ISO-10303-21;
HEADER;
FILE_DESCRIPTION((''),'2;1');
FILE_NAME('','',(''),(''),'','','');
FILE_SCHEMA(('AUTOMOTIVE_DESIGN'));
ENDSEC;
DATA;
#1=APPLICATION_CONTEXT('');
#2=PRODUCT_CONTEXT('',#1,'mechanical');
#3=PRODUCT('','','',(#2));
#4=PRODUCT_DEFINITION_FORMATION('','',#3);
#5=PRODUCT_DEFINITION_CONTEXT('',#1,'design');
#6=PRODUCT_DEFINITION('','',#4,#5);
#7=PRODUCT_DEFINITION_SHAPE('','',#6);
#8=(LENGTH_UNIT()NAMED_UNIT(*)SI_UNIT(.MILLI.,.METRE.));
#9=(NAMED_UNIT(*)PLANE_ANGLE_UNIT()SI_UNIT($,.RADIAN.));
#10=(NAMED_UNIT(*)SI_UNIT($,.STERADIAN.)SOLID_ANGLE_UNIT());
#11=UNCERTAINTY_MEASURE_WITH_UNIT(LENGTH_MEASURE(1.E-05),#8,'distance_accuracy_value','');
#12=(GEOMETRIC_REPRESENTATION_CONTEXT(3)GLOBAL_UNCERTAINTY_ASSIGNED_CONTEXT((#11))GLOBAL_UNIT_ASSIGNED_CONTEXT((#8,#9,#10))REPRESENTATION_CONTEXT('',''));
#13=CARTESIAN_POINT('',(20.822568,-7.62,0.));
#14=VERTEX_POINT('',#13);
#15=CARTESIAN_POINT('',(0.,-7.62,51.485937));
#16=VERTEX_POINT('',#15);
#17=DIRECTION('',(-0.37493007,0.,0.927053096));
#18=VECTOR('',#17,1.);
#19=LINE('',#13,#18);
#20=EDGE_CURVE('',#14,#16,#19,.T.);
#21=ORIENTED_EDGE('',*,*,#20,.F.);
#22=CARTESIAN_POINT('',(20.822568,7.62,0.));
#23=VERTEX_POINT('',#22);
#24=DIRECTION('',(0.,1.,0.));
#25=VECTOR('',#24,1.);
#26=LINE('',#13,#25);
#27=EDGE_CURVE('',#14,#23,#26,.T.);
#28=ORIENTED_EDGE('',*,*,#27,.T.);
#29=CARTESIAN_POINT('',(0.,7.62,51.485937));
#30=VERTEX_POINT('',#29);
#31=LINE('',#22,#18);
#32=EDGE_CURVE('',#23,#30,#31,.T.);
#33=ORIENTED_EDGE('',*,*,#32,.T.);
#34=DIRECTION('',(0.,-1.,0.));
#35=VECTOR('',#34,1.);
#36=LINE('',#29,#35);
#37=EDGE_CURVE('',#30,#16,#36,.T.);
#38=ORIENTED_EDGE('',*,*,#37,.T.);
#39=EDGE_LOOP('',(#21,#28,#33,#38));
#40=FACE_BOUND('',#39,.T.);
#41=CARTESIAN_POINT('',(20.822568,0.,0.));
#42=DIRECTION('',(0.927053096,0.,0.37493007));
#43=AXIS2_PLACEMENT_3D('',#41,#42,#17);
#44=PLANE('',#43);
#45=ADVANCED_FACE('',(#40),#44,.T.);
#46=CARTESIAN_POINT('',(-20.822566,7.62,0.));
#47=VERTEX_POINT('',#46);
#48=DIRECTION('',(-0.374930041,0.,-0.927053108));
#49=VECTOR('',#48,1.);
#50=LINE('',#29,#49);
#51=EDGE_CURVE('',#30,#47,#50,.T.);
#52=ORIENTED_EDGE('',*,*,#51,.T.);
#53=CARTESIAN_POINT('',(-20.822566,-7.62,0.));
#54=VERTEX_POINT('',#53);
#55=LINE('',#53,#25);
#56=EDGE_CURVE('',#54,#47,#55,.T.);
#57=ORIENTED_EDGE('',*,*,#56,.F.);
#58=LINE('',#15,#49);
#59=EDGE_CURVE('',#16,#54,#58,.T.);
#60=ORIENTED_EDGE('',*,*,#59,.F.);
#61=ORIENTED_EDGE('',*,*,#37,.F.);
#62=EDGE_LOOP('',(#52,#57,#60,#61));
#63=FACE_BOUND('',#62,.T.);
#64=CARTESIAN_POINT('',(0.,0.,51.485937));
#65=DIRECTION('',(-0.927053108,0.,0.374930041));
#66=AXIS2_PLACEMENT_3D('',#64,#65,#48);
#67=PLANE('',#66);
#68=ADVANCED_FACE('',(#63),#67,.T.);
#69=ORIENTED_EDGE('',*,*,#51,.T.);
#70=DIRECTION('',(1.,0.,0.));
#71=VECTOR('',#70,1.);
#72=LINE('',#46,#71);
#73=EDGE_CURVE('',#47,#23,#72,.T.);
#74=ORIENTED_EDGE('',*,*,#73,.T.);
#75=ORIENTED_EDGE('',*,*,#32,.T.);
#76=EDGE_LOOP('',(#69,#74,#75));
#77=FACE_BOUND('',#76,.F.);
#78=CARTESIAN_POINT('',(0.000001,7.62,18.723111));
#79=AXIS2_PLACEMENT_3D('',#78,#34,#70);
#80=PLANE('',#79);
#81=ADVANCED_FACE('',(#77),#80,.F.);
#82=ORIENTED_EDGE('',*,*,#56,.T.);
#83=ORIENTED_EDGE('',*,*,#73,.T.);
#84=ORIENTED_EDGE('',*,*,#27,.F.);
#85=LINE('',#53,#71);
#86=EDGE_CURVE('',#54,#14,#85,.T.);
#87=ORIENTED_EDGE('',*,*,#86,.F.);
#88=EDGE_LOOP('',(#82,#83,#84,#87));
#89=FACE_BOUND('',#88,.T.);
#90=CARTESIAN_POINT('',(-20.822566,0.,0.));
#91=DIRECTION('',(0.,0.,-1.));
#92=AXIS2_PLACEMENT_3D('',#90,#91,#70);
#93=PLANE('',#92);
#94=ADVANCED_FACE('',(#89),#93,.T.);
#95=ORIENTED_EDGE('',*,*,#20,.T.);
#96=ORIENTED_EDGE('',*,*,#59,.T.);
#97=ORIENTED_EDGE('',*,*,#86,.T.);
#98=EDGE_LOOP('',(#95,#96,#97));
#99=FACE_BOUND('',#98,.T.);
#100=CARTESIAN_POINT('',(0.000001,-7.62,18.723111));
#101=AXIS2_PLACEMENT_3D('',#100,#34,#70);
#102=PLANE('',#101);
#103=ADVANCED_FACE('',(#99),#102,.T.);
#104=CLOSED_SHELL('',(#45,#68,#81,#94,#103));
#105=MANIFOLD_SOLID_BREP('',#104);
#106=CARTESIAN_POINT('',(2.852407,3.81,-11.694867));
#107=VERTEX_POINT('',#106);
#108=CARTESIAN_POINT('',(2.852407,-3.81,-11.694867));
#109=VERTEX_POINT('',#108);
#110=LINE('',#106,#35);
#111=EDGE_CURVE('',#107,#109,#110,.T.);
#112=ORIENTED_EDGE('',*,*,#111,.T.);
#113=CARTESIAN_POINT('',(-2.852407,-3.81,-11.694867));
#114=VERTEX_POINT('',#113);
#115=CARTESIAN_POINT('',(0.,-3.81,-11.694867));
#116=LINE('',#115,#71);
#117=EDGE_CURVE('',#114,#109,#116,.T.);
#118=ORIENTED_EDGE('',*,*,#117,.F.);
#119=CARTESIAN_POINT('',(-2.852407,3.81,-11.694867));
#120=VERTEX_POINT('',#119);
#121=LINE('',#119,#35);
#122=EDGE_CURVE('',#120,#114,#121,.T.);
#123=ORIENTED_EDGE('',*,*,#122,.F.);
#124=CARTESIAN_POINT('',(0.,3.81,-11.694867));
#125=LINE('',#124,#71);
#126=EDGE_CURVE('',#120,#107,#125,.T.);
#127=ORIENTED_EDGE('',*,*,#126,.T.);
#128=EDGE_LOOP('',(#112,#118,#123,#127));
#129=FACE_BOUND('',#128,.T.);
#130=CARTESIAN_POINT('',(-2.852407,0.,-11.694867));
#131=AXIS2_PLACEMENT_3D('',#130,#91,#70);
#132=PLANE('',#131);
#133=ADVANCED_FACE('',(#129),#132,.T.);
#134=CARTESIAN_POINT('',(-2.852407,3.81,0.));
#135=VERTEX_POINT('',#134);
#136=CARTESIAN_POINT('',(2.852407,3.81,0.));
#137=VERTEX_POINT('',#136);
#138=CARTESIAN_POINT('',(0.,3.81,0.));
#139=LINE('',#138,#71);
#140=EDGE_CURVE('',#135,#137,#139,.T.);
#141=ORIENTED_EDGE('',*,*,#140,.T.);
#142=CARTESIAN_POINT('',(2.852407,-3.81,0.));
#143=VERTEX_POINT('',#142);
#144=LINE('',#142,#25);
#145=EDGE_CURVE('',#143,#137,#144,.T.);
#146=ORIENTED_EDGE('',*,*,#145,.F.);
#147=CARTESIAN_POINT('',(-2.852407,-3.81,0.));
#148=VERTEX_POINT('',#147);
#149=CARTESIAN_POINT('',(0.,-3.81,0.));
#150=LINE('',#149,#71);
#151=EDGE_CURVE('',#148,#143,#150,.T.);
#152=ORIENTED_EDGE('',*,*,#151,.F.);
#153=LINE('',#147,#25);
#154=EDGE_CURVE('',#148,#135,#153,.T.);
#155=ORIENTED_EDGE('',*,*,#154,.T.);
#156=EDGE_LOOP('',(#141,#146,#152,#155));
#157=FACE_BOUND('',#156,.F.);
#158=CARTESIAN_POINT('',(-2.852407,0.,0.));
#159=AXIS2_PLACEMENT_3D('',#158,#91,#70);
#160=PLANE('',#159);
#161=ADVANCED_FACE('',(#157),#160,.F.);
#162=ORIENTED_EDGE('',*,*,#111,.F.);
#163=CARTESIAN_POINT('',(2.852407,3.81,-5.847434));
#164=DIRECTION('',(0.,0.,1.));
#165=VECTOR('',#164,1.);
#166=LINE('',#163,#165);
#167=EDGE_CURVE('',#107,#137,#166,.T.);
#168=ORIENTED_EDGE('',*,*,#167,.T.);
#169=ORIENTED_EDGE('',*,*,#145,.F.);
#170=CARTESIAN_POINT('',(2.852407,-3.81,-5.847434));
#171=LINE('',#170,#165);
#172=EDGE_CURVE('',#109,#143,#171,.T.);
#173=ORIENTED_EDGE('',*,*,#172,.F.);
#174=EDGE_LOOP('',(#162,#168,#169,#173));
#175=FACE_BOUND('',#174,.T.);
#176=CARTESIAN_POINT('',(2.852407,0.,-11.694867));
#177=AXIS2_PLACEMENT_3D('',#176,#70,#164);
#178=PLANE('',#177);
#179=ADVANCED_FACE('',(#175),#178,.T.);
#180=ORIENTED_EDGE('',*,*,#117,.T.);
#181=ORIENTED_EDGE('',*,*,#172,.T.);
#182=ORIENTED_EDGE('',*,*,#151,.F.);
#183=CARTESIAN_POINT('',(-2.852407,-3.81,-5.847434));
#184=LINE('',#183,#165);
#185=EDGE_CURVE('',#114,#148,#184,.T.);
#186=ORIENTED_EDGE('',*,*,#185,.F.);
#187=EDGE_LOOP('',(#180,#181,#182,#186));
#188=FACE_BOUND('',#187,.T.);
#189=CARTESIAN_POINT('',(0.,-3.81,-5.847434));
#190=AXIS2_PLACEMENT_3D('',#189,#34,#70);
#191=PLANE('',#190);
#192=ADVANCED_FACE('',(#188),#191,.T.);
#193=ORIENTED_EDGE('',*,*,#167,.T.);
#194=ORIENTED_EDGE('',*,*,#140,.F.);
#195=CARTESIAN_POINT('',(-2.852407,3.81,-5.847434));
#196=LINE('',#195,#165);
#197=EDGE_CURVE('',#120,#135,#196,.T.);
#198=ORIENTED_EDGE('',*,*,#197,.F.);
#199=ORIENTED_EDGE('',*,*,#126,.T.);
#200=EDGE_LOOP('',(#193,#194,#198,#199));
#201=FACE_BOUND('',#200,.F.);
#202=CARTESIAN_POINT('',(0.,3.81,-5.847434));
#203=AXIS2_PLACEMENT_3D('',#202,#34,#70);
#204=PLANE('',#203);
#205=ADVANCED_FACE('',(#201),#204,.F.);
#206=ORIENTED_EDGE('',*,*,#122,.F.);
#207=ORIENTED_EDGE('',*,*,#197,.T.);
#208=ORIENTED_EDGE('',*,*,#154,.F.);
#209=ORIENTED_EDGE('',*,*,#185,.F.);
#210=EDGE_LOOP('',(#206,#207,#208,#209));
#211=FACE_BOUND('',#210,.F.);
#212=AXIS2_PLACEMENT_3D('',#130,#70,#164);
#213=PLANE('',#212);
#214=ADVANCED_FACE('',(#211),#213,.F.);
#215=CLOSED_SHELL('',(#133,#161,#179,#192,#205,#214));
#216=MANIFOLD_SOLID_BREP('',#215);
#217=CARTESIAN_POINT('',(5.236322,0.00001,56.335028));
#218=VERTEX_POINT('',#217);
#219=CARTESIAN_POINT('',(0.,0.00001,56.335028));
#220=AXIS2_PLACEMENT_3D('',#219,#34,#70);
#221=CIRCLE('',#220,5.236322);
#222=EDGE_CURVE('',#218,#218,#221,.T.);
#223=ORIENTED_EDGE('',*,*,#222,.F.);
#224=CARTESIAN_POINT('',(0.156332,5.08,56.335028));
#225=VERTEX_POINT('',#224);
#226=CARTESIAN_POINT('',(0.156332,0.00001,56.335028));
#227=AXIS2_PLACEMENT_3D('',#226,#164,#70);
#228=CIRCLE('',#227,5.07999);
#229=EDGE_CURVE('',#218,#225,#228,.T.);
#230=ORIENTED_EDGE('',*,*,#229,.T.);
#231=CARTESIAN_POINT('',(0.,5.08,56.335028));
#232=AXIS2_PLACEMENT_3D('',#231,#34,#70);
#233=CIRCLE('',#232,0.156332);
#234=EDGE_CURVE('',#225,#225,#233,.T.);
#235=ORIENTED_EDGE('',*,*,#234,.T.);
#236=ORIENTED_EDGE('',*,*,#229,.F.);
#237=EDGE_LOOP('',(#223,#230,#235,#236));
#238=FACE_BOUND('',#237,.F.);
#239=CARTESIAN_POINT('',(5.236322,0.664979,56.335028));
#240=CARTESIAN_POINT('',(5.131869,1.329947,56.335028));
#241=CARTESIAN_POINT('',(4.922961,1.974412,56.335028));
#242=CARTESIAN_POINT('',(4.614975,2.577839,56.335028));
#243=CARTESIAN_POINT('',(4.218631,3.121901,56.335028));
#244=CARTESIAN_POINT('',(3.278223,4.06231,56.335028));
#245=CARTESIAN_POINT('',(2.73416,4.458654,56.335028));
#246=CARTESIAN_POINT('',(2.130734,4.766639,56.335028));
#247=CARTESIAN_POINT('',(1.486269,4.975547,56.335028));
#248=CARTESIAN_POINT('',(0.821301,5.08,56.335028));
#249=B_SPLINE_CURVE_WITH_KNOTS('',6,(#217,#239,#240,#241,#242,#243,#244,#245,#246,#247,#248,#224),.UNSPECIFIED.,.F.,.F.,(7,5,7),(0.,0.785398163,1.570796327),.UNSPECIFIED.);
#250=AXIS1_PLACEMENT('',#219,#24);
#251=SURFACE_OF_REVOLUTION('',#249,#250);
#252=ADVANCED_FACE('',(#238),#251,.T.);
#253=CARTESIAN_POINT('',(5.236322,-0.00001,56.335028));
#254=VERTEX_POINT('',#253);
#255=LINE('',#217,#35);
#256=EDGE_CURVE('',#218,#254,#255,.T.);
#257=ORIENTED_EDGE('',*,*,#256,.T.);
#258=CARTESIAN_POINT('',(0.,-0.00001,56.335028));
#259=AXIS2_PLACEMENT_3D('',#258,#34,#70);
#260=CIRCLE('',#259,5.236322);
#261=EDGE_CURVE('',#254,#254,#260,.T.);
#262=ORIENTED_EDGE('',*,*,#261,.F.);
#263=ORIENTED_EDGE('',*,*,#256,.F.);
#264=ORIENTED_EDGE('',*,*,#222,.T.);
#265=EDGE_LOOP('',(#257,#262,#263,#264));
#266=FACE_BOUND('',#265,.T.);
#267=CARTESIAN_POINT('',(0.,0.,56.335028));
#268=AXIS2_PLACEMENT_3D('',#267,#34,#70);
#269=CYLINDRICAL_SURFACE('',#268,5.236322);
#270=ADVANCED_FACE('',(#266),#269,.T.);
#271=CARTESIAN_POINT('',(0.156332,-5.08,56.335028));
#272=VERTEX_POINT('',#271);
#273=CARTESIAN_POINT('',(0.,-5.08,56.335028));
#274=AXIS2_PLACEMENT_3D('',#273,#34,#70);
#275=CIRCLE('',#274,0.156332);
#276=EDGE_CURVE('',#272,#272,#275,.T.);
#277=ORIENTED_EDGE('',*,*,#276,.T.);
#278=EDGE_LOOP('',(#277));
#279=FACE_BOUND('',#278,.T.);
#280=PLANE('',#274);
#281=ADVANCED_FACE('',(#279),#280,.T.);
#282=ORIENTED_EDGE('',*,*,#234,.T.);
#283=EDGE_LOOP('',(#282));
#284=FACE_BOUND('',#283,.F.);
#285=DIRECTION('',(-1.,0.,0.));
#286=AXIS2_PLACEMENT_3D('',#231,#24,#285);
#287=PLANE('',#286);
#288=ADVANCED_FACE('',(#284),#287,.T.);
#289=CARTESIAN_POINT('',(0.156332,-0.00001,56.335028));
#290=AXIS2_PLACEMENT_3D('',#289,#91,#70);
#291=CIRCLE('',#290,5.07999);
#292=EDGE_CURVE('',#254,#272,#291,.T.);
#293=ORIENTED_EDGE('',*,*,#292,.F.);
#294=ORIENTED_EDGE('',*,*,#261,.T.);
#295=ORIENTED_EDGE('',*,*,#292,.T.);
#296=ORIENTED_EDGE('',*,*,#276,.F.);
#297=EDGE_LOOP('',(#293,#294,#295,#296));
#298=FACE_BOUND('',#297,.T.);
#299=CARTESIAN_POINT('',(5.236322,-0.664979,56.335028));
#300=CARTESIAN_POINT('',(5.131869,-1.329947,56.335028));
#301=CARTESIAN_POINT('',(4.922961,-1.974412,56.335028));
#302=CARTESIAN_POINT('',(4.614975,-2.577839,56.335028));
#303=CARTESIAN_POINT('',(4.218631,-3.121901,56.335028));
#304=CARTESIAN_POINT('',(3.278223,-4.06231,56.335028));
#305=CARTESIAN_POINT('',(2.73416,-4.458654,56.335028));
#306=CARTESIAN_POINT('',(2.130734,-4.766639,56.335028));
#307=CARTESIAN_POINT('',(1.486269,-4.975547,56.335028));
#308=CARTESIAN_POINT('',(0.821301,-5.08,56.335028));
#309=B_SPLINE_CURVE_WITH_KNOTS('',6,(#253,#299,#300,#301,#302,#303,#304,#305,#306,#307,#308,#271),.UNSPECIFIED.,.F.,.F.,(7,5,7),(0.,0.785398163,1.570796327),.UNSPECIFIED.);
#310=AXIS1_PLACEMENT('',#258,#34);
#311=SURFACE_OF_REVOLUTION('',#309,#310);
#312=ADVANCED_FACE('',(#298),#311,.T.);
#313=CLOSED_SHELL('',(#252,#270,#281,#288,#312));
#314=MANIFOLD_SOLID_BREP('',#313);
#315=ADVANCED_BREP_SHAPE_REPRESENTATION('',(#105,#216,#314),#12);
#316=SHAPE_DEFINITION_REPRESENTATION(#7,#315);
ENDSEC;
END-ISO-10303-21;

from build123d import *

# Parameters (mm, degrees)
F0_R     = 5.2363216072
F3_DEPTH = 5.08
F4_R     = 5.07999
F2_W     = 5.7048136368
F2_H     = 11.6948671639
F6_DEPTH = 3.81
F7_DEPTH = 7.62


# Not quite as in the source:
# - a fillet or chamfer is up to 0.001 mm smaller than in the source, because OpenCascade refuses the exact size


with BuildPart() as f3:
    # F0 (on Front) → F3 (new body)
    with BuildSketch(Plane.XZ):
        with Locations((0, 56.3350282609)):
            Circle(F0_R)
    extrude(amount=F3_DEPTH)

    # F4 (radius 5.08 in the source; OpenCascade refuses exactly that, so slightly less here)
    f4_edges = [f3.edges().sort_by_distance(p)[0] for p in [
        (-5.236322, -5.08, 56.335028),
    ]]
    fillet(f4_edges, radius=F4_R)

    # F5: F3 across plane


with BuildPart() as f3_1:
    add(f3.part)
    add(f3.part.mirror(Plane.XZ))


with BuildPart() as f6:
    # F2 (on Front) → F6 (new body, symmetric)
    with BuildSketch(Plane.XZ):
        with Locations((0, -5.8474335819)):
            Rectangle(F2_W, F2_H)
    extrude(amount=F6_DEPTH, both=True)


with BuildPart() as f7:
    # F1 (on Front) → F7 (new body, symmetric)
    with BuildSketch(Plane.XZ):
        Polygon((20.8225678653, 0), (0, 51.4859370887), (-20.8225660026, 0), align=None)
    extrude(amount=F7_DEPTH, both=True)


solid = Compound([f3_1.part, f6.part, f7.part])
